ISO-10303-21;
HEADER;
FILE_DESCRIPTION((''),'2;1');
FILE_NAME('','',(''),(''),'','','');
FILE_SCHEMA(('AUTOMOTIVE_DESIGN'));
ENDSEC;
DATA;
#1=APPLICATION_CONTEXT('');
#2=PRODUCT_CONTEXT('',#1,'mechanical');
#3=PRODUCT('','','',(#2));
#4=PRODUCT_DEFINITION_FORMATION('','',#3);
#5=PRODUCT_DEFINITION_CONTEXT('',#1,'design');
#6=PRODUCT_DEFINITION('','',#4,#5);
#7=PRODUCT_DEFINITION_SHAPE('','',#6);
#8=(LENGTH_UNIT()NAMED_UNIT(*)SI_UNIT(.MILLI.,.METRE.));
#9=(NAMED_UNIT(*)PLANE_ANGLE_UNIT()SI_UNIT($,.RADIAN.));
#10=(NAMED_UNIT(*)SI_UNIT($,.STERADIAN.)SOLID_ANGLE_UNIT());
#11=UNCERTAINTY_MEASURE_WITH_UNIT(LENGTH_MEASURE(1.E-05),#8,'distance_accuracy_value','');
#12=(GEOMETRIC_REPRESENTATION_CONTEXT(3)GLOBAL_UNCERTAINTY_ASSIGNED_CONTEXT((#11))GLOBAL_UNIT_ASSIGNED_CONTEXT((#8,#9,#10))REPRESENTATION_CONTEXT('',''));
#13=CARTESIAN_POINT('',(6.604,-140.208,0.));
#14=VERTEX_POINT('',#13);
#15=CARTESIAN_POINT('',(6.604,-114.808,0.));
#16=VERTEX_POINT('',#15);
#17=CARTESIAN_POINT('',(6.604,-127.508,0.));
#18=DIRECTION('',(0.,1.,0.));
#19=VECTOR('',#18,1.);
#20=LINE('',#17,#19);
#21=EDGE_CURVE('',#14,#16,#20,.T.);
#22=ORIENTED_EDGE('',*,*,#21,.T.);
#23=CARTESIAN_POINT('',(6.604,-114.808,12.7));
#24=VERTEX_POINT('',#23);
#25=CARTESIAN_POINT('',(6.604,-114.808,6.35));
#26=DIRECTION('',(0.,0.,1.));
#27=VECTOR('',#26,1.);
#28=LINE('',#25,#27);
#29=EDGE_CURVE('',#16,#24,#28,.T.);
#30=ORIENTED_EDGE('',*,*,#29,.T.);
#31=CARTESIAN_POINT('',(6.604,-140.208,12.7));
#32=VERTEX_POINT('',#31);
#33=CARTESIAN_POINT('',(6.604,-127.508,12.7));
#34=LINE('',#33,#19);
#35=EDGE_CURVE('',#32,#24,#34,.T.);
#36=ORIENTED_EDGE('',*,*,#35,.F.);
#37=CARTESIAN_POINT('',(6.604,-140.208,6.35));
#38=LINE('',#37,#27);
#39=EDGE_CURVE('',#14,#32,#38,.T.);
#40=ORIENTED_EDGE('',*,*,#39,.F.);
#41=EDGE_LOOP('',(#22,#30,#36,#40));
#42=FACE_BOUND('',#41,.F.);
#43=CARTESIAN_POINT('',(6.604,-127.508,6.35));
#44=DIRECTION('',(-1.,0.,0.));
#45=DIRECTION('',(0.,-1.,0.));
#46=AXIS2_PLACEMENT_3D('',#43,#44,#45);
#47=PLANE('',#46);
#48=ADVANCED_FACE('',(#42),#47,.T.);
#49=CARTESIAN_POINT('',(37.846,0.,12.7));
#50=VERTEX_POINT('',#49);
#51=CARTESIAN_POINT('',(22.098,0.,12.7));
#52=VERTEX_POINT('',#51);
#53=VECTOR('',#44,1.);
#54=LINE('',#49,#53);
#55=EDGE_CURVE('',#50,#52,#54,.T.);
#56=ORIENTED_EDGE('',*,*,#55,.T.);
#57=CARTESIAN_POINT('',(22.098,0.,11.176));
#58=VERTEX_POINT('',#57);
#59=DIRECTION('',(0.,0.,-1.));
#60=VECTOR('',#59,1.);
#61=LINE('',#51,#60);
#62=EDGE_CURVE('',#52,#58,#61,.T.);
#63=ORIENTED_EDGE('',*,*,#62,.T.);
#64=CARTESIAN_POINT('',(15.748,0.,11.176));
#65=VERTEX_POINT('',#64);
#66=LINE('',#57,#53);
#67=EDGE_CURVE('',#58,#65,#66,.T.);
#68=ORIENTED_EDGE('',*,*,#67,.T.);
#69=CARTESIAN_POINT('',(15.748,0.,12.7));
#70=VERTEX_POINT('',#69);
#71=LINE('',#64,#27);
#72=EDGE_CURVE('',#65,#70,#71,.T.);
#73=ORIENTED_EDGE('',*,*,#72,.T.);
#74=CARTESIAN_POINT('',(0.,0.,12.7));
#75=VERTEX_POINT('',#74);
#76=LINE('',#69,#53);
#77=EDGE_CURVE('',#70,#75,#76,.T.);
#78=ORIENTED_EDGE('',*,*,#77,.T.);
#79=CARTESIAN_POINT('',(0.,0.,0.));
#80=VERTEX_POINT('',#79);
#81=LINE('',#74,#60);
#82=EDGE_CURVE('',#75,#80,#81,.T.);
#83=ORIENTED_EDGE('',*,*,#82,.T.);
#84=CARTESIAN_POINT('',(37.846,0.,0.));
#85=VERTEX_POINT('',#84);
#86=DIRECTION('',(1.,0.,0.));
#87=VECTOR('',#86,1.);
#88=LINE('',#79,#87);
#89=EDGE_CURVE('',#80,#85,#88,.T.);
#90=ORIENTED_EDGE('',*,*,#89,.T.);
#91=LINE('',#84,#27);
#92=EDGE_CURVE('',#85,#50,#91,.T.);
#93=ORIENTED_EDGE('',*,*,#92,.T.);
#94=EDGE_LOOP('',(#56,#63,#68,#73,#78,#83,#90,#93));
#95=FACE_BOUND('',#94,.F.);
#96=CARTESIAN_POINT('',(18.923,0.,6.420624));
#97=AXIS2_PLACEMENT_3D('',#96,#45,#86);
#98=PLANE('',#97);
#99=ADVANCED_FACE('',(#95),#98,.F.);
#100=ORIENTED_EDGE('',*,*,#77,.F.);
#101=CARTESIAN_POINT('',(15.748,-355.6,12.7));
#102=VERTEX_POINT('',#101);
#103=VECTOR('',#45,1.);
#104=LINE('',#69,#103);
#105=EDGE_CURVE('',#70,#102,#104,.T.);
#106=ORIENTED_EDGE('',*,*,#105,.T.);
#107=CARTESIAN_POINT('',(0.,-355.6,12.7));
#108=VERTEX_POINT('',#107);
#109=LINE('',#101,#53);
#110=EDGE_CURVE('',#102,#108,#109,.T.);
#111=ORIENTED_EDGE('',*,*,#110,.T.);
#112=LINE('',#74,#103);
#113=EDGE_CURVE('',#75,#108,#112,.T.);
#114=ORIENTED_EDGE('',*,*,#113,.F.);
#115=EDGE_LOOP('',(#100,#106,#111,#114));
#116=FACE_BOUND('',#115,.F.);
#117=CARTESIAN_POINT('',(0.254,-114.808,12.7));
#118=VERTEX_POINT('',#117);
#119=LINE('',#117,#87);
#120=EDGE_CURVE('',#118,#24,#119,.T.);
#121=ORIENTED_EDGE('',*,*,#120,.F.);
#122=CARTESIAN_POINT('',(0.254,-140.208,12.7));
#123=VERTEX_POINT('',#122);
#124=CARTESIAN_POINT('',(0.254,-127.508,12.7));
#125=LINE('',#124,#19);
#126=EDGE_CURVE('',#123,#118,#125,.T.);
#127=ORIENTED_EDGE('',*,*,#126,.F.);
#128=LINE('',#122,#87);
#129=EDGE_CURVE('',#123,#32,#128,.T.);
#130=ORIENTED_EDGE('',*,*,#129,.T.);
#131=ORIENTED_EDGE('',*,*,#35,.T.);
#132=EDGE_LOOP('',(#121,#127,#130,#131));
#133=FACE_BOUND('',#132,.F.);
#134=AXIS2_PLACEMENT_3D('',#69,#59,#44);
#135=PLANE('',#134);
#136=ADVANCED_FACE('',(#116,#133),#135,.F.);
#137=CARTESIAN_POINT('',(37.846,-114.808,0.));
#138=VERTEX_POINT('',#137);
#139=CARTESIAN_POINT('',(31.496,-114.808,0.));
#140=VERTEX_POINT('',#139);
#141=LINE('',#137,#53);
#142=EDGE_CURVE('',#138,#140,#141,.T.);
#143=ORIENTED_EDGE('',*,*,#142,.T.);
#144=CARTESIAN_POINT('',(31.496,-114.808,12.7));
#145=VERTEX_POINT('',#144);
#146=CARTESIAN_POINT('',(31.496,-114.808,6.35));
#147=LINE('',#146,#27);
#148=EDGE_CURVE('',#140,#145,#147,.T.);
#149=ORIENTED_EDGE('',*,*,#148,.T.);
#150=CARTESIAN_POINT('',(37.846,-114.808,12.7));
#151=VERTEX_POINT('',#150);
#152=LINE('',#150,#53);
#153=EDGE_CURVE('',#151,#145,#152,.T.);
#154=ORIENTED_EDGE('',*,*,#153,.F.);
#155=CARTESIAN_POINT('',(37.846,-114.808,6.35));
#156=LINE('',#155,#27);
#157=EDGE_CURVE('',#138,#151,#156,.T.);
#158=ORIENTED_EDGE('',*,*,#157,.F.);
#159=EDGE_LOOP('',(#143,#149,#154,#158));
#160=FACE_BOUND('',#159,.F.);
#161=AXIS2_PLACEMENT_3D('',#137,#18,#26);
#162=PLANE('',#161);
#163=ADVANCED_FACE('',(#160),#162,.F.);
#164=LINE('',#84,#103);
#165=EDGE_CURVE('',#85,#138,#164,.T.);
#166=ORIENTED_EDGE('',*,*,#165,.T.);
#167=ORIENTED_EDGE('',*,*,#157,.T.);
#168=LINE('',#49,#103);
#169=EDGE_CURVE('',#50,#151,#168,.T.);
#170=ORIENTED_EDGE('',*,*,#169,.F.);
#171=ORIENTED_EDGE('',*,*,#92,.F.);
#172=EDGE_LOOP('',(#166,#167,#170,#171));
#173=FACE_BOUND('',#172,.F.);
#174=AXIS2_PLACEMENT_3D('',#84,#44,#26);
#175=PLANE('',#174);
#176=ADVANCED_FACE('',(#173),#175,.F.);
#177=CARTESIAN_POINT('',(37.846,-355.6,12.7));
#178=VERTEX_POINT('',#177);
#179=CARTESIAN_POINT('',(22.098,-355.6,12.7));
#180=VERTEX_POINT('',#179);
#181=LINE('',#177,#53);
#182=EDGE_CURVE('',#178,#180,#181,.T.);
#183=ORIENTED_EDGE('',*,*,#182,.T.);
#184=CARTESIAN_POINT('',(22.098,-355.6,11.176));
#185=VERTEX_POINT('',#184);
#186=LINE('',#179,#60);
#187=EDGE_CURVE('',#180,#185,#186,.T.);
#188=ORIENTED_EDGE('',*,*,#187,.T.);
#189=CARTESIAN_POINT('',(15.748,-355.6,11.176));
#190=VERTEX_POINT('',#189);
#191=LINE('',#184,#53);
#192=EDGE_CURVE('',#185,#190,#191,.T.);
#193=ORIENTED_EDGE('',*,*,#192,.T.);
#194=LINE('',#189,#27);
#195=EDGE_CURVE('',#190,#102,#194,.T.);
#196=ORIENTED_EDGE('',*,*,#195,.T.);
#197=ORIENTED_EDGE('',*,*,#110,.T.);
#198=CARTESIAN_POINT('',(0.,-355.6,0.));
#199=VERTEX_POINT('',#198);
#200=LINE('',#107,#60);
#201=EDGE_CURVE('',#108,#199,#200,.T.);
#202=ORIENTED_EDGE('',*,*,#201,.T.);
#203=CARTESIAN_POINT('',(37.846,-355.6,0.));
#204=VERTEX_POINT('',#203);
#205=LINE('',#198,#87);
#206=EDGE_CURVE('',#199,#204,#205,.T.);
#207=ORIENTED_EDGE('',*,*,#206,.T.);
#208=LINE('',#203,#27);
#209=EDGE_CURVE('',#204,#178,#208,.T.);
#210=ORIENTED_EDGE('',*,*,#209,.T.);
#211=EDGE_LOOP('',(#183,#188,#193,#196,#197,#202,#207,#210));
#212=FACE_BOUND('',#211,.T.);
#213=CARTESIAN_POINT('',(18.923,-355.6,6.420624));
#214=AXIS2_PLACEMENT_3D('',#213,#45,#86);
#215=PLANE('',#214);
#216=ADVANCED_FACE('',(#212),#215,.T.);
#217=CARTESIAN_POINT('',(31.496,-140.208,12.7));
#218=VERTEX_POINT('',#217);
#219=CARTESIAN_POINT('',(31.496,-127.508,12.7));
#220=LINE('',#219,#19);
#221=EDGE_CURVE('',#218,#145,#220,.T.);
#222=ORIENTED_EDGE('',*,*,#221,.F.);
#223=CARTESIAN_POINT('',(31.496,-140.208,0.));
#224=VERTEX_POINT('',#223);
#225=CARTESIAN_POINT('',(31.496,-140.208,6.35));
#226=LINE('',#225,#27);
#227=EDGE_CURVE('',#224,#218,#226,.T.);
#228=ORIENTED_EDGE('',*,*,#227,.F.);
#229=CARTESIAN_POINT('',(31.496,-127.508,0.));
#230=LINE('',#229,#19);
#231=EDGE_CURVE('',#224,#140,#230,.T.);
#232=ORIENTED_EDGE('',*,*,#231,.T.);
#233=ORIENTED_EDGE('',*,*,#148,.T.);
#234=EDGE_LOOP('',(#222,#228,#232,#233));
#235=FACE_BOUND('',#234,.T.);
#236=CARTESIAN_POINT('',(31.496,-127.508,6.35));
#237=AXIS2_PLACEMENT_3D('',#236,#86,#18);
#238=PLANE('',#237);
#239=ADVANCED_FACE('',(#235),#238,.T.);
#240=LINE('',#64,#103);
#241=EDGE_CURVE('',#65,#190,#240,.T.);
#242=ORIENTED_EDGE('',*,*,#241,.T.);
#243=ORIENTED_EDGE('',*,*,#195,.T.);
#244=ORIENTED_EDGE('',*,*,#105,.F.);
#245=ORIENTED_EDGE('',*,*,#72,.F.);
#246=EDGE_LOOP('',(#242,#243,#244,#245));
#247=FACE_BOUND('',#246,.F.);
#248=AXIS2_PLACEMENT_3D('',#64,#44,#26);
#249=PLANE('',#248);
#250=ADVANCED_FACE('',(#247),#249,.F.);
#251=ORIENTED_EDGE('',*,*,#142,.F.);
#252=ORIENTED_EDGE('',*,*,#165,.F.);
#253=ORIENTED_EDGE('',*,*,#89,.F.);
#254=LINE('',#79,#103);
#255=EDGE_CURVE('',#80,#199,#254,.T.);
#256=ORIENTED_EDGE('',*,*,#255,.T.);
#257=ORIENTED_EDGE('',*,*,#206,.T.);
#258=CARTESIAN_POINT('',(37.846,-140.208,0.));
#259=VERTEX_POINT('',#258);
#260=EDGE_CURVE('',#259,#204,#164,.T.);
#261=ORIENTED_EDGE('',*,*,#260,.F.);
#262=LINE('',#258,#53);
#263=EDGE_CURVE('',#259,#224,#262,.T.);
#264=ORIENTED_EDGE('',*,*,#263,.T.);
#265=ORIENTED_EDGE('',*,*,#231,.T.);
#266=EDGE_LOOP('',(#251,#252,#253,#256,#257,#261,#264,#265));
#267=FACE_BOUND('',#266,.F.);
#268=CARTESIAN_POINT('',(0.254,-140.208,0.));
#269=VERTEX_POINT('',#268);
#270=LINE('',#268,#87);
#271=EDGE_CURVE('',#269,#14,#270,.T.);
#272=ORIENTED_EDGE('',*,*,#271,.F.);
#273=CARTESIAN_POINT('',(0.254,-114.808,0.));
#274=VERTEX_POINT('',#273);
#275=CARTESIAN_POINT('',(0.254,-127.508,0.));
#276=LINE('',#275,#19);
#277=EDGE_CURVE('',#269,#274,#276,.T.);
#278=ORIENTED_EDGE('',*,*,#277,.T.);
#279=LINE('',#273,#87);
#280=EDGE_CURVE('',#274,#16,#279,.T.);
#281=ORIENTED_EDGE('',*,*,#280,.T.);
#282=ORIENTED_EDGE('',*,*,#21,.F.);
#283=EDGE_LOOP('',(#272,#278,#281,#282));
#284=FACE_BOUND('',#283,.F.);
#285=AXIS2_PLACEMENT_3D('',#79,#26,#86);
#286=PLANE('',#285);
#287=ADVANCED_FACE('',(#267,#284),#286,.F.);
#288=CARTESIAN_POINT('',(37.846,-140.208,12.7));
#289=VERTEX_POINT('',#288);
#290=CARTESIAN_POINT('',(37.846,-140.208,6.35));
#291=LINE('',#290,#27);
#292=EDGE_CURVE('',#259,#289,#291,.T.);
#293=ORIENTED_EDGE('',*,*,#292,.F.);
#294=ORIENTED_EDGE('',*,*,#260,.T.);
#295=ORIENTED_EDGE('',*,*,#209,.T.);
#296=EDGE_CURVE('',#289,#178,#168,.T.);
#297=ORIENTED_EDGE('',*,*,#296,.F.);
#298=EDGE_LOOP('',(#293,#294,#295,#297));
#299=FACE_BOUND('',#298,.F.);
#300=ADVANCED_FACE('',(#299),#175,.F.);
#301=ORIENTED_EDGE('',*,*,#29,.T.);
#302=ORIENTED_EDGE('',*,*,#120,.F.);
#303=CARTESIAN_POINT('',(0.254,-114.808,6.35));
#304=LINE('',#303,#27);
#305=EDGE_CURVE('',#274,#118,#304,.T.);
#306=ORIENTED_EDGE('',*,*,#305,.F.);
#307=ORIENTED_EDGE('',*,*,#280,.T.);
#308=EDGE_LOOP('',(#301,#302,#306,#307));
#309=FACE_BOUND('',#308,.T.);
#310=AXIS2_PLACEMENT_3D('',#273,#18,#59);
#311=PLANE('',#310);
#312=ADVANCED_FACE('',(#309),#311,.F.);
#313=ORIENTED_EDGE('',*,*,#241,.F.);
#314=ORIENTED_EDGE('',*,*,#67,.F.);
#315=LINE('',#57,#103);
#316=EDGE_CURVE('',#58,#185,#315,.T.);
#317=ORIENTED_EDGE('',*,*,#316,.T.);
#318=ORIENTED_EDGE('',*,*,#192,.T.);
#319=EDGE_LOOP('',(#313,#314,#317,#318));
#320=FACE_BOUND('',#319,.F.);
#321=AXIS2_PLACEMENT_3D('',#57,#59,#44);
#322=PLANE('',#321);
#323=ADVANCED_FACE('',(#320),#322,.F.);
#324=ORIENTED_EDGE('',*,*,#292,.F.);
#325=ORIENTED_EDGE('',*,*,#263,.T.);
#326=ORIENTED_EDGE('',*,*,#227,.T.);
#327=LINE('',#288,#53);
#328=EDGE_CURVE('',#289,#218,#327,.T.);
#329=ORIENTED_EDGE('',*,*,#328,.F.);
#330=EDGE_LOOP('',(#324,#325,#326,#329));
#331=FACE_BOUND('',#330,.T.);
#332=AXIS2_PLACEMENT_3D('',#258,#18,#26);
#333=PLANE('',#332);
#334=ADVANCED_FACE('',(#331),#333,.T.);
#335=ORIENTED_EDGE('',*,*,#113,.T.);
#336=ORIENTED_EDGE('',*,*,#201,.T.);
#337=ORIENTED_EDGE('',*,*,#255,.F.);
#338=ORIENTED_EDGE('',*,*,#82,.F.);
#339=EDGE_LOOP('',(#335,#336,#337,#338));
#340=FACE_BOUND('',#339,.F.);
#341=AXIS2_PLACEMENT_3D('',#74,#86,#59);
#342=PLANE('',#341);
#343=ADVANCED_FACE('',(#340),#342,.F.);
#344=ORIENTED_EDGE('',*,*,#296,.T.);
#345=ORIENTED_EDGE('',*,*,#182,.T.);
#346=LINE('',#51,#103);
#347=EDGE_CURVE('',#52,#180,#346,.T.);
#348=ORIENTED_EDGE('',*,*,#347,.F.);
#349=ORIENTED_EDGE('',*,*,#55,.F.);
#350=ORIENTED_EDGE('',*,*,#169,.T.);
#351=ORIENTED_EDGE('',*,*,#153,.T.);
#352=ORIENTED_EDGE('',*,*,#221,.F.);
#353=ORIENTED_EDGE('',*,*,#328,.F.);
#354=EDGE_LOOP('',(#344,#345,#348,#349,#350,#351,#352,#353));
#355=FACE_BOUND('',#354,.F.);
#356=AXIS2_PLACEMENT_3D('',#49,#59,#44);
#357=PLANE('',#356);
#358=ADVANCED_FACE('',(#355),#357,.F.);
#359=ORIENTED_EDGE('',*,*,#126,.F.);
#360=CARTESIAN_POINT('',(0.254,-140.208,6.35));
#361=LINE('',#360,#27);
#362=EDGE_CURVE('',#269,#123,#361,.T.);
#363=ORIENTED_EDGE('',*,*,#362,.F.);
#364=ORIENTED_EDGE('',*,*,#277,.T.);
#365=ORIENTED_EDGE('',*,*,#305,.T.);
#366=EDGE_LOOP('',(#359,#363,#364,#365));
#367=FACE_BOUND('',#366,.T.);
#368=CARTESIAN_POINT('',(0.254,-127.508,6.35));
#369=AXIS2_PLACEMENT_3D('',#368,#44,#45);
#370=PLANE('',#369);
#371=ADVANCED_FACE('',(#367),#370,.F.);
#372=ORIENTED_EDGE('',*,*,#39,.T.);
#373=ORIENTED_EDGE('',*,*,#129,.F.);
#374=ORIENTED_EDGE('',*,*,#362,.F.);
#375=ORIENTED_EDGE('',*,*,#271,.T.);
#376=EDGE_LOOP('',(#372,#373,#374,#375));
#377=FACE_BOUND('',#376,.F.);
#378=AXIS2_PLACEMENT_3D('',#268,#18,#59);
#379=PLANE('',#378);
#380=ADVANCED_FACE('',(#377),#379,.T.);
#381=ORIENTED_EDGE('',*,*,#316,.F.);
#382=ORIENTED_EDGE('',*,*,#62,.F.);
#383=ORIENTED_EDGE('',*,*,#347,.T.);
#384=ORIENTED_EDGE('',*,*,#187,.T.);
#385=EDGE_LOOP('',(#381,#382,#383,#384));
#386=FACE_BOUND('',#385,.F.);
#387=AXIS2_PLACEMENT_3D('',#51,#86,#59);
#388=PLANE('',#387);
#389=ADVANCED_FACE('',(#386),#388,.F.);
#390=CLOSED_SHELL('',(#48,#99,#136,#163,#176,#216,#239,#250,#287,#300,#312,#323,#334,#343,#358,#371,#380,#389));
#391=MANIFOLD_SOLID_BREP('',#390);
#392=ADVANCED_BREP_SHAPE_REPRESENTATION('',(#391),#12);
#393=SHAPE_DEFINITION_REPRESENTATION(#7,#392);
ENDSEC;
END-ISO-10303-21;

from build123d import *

# Parameters (mm, degrees)
F1_DEPTH = 355.6
F2_W     = 25.4
F2_H     = 12.7
F3_DEPTH = 6.35


# Not quite as in the source:
# - a pattern or mirror of a feature is missing from the dataset's text; its kind, count and spacing are read off the source's solid


with BuildPart() as f1:
    # F0 (on Front) → F1 (new body)
    with BuildSketch(Plane.XZ):
        Polygon((15.748, 12.7), (0, 12.7), (0, 0), (37.846, 0), (37.846, 12.7), (22.098, 12.7), (22.098, 11.176), (15.748, 11.176), align=None)
    extrude(amount=F1_DEPTH)

    # F2 (on face) → F3 (cut)
    with BuildSketch(Plane.YZ.offset(37.846)):
        with Locations((-127.508, 6.35)):
            Rectangle(F2_W, F2_H)
    f3 = extrude(amount=-F3_DEPTH, mode=Mode.SUBTRACT)

    # F3_copies: F3 across plane
    add(f3.mirror(Plane(origin=(19.05, 0, 0), x_dir=(0, 0, -1), z_dir=(-1, 0, 0))), mode=Mode.SUBTRACT)


solid = f1.part
